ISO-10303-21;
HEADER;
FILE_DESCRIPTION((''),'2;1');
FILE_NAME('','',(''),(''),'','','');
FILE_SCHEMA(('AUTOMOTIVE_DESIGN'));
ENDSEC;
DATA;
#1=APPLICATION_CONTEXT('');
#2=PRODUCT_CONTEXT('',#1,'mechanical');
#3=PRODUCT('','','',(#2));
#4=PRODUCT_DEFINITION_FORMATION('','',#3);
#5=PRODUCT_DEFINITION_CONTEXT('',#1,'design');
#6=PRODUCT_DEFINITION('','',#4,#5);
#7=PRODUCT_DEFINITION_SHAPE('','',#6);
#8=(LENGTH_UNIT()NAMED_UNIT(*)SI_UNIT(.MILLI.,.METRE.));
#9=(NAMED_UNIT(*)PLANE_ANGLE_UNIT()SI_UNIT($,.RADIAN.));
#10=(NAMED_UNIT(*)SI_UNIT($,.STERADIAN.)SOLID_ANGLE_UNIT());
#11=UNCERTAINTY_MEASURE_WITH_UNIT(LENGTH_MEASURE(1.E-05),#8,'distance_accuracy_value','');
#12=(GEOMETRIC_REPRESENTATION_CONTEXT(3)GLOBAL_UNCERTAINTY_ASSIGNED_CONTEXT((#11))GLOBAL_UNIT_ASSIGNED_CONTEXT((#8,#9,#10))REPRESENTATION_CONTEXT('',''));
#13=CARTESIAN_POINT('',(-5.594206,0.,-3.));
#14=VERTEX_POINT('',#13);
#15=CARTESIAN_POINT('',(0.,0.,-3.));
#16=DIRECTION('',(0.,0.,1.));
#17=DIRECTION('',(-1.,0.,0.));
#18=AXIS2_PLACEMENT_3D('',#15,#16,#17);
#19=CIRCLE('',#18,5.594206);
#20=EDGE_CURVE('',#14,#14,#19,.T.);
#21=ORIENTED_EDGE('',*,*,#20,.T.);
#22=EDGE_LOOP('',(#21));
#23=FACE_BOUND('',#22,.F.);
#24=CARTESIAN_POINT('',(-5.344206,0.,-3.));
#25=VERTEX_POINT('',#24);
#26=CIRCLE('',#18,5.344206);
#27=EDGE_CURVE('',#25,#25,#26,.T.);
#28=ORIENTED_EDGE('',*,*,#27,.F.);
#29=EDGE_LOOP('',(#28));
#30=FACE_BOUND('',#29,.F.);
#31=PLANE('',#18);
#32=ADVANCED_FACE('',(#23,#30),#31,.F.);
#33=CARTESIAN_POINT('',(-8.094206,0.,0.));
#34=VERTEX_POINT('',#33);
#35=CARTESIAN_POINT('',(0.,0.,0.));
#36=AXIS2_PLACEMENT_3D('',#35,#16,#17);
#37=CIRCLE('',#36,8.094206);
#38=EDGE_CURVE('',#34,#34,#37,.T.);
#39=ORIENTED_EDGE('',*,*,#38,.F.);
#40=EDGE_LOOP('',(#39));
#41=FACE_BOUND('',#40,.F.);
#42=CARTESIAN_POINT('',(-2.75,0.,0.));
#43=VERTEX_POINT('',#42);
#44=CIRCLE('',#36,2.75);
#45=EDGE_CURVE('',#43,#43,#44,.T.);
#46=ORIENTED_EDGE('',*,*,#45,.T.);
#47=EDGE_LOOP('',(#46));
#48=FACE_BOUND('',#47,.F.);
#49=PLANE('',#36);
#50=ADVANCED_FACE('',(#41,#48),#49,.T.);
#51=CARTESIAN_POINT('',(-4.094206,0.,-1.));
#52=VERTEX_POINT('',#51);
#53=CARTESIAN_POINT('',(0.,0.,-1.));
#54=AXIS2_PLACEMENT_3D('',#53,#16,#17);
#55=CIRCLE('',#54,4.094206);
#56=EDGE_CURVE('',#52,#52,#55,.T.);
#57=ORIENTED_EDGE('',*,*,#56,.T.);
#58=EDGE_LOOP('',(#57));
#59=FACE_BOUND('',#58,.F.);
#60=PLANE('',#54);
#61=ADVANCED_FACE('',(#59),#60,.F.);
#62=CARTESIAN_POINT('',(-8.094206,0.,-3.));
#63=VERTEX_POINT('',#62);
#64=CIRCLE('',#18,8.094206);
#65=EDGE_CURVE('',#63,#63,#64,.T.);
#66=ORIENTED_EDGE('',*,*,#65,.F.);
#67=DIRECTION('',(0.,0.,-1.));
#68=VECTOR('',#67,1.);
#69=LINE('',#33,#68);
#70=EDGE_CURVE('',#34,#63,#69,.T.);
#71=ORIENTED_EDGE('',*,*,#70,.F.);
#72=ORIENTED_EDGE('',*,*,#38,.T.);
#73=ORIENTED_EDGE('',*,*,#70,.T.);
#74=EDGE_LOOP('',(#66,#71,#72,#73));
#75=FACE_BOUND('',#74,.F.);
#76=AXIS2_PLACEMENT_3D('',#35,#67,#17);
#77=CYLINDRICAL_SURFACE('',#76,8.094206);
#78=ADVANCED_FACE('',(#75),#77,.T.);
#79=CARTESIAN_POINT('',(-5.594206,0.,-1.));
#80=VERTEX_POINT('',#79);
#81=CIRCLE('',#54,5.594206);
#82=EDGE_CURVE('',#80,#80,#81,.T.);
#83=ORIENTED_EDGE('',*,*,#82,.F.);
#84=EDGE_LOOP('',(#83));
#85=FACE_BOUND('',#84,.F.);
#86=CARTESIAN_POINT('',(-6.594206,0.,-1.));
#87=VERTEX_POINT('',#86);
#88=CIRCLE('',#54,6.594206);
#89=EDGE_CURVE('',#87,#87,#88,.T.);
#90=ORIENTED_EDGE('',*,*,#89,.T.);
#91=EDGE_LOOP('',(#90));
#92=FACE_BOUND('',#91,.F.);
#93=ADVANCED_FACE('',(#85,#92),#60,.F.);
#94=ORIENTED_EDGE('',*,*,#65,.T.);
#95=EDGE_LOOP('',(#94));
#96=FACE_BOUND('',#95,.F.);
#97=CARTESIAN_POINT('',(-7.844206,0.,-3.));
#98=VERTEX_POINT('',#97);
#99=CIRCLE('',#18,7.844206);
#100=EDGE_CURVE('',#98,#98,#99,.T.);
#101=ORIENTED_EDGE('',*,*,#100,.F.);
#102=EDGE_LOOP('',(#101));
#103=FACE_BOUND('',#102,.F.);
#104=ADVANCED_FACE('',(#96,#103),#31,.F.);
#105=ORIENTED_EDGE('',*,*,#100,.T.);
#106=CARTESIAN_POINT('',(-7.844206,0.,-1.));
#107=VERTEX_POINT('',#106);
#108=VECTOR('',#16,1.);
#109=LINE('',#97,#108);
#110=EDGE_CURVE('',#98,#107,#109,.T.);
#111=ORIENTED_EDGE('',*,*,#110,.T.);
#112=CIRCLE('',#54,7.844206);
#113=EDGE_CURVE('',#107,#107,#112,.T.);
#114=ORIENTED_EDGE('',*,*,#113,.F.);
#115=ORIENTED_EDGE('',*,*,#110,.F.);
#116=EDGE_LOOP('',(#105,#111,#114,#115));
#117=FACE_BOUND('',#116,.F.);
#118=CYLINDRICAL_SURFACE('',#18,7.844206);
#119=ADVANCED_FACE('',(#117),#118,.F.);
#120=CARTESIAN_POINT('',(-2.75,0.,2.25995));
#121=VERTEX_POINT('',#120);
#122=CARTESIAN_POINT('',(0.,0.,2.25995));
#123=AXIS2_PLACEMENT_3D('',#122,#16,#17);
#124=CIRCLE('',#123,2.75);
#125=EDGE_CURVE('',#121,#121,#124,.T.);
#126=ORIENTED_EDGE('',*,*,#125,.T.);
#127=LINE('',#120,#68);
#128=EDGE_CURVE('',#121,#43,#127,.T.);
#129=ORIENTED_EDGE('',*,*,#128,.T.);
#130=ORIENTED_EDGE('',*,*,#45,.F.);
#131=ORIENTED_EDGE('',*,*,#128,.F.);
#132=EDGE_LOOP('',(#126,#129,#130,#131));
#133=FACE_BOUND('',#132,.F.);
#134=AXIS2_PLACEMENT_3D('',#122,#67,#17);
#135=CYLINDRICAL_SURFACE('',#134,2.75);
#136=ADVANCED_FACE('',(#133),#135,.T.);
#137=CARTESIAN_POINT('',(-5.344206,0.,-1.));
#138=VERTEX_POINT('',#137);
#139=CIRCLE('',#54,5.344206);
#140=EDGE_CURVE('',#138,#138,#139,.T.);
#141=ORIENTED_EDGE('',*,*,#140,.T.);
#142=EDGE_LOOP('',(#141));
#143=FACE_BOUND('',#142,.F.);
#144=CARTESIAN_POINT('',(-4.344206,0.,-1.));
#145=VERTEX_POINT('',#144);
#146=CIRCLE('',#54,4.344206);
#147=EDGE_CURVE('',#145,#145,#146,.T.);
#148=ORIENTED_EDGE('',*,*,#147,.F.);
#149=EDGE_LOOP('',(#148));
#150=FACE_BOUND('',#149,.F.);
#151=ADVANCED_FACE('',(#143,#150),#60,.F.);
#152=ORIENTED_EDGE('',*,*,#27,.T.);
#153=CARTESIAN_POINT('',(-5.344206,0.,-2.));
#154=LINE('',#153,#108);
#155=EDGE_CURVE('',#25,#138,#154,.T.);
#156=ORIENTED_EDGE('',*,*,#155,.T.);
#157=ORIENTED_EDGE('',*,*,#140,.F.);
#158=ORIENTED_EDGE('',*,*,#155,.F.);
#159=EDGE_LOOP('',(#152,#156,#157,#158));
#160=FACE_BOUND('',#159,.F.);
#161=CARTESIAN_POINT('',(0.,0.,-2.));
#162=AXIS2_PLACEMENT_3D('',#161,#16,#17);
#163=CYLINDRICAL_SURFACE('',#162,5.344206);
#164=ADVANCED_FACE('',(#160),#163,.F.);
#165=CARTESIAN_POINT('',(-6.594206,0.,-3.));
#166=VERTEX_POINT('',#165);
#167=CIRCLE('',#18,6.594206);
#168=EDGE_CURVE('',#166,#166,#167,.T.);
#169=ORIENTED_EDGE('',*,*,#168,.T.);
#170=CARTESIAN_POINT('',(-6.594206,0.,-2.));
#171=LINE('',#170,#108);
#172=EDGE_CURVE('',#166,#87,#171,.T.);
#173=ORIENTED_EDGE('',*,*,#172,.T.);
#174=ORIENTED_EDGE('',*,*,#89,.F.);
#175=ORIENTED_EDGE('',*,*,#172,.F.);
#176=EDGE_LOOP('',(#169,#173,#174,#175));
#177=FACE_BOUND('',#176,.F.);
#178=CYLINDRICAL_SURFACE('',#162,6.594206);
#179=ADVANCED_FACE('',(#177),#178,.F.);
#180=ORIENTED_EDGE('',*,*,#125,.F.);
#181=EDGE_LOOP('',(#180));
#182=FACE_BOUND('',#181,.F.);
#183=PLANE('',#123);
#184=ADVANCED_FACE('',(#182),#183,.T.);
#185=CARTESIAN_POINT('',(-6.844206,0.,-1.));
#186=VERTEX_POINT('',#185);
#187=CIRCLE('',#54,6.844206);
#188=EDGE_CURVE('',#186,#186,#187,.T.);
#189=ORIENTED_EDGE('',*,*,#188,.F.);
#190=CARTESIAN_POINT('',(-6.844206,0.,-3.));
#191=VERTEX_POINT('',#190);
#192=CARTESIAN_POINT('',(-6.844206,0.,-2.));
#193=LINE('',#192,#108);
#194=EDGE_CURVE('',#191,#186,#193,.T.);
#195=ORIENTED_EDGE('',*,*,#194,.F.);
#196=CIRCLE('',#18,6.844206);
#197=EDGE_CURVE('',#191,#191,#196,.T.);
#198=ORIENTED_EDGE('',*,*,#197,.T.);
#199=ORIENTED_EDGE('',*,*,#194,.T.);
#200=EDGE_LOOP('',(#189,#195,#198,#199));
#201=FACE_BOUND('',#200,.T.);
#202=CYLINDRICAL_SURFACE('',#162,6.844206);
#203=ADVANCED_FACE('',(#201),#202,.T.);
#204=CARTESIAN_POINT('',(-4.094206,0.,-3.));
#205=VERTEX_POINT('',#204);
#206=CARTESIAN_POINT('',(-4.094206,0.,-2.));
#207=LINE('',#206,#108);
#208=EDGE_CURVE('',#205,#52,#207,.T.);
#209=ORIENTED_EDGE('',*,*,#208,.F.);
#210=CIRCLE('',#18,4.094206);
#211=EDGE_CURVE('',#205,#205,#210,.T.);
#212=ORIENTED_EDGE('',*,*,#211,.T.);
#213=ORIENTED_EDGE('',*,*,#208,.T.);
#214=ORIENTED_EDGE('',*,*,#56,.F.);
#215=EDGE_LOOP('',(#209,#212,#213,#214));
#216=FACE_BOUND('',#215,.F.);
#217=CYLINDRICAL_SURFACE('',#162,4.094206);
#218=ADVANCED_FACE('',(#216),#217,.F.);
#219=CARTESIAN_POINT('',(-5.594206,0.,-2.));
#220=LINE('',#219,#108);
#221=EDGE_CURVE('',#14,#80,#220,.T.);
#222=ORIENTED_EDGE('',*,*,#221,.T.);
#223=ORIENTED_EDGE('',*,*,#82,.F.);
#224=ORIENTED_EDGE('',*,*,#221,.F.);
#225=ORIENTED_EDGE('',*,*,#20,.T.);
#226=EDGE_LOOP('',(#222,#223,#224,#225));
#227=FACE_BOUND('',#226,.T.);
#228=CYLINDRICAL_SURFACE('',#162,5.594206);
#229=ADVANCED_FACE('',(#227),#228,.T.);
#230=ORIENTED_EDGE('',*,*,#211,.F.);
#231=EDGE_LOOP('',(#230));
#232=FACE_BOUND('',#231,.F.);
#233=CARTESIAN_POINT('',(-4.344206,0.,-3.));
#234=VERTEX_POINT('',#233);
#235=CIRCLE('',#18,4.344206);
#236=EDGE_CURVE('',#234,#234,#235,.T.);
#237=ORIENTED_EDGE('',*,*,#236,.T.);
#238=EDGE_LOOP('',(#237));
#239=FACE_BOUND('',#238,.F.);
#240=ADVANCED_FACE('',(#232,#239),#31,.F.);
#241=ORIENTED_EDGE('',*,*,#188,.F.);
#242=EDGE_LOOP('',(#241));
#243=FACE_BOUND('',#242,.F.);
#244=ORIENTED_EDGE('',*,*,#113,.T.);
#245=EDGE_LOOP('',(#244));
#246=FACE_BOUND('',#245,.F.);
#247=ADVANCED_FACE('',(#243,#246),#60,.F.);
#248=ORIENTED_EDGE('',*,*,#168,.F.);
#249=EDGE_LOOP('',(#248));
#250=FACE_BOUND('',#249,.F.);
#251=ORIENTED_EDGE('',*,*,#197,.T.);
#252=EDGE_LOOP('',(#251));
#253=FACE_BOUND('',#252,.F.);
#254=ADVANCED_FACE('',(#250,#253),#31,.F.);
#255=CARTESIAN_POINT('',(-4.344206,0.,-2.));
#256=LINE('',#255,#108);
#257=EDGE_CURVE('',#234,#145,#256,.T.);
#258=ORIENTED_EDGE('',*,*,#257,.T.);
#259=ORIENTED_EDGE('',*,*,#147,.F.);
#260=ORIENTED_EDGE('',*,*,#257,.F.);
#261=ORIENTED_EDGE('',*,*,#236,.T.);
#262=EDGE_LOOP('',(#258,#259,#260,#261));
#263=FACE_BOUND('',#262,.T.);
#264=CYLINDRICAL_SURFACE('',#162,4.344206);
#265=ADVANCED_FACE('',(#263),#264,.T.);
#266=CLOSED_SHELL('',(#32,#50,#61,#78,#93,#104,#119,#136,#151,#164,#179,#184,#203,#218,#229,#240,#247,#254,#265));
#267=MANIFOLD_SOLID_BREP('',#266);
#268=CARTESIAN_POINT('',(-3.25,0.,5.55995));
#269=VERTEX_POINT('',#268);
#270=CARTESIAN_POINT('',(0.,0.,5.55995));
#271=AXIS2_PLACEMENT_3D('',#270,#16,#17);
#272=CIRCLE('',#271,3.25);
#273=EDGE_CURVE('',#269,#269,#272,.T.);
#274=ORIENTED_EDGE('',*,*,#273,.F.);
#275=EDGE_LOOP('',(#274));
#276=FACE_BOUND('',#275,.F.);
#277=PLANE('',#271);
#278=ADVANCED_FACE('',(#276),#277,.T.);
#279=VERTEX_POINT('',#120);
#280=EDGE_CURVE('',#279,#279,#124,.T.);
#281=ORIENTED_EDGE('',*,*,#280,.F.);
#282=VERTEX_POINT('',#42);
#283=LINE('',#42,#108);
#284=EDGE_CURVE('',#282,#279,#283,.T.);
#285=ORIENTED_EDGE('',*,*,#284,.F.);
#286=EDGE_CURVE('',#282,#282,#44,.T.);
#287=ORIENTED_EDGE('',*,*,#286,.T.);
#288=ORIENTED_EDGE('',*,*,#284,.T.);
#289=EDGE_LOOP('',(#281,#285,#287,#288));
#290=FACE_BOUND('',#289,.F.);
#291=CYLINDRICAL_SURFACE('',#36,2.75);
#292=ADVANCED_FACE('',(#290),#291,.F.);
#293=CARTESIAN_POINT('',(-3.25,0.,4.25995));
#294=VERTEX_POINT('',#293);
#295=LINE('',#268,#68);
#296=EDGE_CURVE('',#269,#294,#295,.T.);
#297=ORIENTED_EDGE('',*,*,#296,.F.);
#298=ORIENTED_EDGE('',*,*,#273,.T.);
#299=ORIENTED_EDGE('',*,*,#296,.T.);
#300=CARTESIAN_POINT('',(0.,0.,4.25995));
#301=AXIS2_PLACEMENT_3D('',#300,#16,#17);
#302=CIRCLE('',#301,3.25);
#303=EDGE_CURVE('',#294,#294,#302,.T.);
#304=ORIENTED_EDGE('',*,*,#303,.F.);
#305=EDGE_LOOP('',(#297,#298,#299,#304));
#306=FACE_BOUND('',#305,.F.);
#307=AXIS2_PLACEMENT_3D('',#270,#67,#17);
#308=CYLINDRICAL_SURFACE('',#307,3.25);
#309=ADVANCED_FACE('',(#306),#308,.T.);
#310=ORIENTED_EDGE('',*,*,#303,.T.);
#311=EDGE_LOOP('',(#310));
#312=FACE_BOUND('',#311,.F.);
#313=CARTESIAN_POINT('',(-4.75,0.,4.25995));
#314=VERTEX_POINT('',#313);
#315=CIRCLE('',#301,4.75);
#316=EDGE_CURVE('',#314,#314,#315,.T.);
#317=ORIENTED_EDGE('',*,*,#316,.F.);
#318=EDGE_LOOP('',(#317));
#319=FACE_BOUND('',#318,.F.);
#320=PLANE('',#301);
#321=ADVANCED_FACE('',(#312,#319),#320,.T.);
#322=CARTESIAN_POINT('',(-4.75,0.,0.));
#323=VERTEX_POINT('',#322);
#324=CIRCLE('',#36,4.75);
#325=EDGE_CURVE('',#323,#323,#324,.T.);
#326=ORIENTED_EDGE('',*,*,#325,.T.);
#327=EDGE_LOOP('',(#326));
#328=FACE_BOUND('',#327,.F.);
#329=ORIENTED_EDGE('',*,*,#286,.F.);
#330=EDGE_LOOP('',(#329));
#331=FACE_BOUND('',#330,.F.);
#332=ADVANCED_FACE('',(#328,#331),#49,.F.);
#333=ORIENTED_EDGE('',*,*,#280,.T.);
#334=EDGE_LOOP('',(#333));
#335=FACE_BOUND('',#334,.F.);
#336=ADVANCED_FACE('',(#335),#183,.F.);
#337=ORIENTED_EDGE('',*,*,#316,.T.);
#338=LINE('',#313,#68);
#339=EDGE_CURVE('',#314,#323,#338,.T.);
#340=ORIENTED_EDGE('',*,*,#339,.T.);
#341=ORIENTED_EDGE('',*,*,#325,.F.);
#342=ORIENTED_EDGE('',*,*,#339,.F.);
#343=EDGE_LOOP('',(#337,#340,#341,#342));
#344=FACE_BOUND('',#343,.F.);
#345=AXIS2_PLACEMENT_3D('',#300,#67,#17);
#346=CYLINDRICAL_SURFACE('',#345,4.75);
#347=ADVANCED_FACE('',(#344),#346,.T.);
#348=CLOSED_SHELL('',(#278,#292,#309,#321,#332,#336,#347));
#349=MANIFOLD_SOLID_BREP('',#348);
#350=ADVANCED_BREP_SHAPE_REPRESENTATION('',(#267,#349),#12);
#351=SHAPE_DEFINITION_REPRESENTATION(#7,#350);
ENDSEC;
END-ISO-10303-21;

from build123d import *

# Parameters (mm, degrees)
F0_W = 0.25
F0_H = 2


# Not quite as in the source:
# - a feature names something its author has since deleted; it is built from what else it names


with BuildPart() as f1:
    # F0 (on Front) → F1 (revolve)
    with BuildSketch(Plane.XZ):
        Polygon((0, 2.2599502219), (0, 5.5599502219), (-3.25, 5.5599502219), (-3.25, 4.2599502219), (-4.75, 4.2599502219), (-4.75, 0), (-2.75, 0), (-2.75, 2.2599502219), align=None)
    revolve(axis=Axis((0, 0, 3.9099502219), (0, 0, 1)))


with BuildPart() as f2:
    # F0 (on Front) → F2 (revolve)
    with BuildSketch(Plane.XZ):
        with Locations((-6.7192060259, -2)):
            Rectangle(F0_W, F0_H)
        with Locations((-5.4692060259, -2)):
            Rectangle(F0_W, F0_H)
        with Locations((-4.2192060259, -2)):
            Rectangle(F0_W, F0_H)
        Polygon((0, -1), (0, 2.2599502219), (-2.75, 2.2599502219), (-2.75, 0), (-4.75, 0), (-6.2268639432, 0), (-8.0942060259, 0), (-8.0942060259, -3), (-7.8442060259, -3), (-7.8442060259, -1), (-6.8442060259, -1), (-6.5942060259, -1), (-5.5942060259, -1), (-5.3442060259, -1), (-4.3442060259, -1), (-4.0942060259, -1), (-3.0942060259, -1), (-2.8442060259, -1), (-1.8442060259, -1), (-1.5942060259, -1), align=None)
    revolve(axis=Axis((0, 0, 0.6299751109), (0, 0, 1)))


solid = Compound([f1.part, f2.part])
